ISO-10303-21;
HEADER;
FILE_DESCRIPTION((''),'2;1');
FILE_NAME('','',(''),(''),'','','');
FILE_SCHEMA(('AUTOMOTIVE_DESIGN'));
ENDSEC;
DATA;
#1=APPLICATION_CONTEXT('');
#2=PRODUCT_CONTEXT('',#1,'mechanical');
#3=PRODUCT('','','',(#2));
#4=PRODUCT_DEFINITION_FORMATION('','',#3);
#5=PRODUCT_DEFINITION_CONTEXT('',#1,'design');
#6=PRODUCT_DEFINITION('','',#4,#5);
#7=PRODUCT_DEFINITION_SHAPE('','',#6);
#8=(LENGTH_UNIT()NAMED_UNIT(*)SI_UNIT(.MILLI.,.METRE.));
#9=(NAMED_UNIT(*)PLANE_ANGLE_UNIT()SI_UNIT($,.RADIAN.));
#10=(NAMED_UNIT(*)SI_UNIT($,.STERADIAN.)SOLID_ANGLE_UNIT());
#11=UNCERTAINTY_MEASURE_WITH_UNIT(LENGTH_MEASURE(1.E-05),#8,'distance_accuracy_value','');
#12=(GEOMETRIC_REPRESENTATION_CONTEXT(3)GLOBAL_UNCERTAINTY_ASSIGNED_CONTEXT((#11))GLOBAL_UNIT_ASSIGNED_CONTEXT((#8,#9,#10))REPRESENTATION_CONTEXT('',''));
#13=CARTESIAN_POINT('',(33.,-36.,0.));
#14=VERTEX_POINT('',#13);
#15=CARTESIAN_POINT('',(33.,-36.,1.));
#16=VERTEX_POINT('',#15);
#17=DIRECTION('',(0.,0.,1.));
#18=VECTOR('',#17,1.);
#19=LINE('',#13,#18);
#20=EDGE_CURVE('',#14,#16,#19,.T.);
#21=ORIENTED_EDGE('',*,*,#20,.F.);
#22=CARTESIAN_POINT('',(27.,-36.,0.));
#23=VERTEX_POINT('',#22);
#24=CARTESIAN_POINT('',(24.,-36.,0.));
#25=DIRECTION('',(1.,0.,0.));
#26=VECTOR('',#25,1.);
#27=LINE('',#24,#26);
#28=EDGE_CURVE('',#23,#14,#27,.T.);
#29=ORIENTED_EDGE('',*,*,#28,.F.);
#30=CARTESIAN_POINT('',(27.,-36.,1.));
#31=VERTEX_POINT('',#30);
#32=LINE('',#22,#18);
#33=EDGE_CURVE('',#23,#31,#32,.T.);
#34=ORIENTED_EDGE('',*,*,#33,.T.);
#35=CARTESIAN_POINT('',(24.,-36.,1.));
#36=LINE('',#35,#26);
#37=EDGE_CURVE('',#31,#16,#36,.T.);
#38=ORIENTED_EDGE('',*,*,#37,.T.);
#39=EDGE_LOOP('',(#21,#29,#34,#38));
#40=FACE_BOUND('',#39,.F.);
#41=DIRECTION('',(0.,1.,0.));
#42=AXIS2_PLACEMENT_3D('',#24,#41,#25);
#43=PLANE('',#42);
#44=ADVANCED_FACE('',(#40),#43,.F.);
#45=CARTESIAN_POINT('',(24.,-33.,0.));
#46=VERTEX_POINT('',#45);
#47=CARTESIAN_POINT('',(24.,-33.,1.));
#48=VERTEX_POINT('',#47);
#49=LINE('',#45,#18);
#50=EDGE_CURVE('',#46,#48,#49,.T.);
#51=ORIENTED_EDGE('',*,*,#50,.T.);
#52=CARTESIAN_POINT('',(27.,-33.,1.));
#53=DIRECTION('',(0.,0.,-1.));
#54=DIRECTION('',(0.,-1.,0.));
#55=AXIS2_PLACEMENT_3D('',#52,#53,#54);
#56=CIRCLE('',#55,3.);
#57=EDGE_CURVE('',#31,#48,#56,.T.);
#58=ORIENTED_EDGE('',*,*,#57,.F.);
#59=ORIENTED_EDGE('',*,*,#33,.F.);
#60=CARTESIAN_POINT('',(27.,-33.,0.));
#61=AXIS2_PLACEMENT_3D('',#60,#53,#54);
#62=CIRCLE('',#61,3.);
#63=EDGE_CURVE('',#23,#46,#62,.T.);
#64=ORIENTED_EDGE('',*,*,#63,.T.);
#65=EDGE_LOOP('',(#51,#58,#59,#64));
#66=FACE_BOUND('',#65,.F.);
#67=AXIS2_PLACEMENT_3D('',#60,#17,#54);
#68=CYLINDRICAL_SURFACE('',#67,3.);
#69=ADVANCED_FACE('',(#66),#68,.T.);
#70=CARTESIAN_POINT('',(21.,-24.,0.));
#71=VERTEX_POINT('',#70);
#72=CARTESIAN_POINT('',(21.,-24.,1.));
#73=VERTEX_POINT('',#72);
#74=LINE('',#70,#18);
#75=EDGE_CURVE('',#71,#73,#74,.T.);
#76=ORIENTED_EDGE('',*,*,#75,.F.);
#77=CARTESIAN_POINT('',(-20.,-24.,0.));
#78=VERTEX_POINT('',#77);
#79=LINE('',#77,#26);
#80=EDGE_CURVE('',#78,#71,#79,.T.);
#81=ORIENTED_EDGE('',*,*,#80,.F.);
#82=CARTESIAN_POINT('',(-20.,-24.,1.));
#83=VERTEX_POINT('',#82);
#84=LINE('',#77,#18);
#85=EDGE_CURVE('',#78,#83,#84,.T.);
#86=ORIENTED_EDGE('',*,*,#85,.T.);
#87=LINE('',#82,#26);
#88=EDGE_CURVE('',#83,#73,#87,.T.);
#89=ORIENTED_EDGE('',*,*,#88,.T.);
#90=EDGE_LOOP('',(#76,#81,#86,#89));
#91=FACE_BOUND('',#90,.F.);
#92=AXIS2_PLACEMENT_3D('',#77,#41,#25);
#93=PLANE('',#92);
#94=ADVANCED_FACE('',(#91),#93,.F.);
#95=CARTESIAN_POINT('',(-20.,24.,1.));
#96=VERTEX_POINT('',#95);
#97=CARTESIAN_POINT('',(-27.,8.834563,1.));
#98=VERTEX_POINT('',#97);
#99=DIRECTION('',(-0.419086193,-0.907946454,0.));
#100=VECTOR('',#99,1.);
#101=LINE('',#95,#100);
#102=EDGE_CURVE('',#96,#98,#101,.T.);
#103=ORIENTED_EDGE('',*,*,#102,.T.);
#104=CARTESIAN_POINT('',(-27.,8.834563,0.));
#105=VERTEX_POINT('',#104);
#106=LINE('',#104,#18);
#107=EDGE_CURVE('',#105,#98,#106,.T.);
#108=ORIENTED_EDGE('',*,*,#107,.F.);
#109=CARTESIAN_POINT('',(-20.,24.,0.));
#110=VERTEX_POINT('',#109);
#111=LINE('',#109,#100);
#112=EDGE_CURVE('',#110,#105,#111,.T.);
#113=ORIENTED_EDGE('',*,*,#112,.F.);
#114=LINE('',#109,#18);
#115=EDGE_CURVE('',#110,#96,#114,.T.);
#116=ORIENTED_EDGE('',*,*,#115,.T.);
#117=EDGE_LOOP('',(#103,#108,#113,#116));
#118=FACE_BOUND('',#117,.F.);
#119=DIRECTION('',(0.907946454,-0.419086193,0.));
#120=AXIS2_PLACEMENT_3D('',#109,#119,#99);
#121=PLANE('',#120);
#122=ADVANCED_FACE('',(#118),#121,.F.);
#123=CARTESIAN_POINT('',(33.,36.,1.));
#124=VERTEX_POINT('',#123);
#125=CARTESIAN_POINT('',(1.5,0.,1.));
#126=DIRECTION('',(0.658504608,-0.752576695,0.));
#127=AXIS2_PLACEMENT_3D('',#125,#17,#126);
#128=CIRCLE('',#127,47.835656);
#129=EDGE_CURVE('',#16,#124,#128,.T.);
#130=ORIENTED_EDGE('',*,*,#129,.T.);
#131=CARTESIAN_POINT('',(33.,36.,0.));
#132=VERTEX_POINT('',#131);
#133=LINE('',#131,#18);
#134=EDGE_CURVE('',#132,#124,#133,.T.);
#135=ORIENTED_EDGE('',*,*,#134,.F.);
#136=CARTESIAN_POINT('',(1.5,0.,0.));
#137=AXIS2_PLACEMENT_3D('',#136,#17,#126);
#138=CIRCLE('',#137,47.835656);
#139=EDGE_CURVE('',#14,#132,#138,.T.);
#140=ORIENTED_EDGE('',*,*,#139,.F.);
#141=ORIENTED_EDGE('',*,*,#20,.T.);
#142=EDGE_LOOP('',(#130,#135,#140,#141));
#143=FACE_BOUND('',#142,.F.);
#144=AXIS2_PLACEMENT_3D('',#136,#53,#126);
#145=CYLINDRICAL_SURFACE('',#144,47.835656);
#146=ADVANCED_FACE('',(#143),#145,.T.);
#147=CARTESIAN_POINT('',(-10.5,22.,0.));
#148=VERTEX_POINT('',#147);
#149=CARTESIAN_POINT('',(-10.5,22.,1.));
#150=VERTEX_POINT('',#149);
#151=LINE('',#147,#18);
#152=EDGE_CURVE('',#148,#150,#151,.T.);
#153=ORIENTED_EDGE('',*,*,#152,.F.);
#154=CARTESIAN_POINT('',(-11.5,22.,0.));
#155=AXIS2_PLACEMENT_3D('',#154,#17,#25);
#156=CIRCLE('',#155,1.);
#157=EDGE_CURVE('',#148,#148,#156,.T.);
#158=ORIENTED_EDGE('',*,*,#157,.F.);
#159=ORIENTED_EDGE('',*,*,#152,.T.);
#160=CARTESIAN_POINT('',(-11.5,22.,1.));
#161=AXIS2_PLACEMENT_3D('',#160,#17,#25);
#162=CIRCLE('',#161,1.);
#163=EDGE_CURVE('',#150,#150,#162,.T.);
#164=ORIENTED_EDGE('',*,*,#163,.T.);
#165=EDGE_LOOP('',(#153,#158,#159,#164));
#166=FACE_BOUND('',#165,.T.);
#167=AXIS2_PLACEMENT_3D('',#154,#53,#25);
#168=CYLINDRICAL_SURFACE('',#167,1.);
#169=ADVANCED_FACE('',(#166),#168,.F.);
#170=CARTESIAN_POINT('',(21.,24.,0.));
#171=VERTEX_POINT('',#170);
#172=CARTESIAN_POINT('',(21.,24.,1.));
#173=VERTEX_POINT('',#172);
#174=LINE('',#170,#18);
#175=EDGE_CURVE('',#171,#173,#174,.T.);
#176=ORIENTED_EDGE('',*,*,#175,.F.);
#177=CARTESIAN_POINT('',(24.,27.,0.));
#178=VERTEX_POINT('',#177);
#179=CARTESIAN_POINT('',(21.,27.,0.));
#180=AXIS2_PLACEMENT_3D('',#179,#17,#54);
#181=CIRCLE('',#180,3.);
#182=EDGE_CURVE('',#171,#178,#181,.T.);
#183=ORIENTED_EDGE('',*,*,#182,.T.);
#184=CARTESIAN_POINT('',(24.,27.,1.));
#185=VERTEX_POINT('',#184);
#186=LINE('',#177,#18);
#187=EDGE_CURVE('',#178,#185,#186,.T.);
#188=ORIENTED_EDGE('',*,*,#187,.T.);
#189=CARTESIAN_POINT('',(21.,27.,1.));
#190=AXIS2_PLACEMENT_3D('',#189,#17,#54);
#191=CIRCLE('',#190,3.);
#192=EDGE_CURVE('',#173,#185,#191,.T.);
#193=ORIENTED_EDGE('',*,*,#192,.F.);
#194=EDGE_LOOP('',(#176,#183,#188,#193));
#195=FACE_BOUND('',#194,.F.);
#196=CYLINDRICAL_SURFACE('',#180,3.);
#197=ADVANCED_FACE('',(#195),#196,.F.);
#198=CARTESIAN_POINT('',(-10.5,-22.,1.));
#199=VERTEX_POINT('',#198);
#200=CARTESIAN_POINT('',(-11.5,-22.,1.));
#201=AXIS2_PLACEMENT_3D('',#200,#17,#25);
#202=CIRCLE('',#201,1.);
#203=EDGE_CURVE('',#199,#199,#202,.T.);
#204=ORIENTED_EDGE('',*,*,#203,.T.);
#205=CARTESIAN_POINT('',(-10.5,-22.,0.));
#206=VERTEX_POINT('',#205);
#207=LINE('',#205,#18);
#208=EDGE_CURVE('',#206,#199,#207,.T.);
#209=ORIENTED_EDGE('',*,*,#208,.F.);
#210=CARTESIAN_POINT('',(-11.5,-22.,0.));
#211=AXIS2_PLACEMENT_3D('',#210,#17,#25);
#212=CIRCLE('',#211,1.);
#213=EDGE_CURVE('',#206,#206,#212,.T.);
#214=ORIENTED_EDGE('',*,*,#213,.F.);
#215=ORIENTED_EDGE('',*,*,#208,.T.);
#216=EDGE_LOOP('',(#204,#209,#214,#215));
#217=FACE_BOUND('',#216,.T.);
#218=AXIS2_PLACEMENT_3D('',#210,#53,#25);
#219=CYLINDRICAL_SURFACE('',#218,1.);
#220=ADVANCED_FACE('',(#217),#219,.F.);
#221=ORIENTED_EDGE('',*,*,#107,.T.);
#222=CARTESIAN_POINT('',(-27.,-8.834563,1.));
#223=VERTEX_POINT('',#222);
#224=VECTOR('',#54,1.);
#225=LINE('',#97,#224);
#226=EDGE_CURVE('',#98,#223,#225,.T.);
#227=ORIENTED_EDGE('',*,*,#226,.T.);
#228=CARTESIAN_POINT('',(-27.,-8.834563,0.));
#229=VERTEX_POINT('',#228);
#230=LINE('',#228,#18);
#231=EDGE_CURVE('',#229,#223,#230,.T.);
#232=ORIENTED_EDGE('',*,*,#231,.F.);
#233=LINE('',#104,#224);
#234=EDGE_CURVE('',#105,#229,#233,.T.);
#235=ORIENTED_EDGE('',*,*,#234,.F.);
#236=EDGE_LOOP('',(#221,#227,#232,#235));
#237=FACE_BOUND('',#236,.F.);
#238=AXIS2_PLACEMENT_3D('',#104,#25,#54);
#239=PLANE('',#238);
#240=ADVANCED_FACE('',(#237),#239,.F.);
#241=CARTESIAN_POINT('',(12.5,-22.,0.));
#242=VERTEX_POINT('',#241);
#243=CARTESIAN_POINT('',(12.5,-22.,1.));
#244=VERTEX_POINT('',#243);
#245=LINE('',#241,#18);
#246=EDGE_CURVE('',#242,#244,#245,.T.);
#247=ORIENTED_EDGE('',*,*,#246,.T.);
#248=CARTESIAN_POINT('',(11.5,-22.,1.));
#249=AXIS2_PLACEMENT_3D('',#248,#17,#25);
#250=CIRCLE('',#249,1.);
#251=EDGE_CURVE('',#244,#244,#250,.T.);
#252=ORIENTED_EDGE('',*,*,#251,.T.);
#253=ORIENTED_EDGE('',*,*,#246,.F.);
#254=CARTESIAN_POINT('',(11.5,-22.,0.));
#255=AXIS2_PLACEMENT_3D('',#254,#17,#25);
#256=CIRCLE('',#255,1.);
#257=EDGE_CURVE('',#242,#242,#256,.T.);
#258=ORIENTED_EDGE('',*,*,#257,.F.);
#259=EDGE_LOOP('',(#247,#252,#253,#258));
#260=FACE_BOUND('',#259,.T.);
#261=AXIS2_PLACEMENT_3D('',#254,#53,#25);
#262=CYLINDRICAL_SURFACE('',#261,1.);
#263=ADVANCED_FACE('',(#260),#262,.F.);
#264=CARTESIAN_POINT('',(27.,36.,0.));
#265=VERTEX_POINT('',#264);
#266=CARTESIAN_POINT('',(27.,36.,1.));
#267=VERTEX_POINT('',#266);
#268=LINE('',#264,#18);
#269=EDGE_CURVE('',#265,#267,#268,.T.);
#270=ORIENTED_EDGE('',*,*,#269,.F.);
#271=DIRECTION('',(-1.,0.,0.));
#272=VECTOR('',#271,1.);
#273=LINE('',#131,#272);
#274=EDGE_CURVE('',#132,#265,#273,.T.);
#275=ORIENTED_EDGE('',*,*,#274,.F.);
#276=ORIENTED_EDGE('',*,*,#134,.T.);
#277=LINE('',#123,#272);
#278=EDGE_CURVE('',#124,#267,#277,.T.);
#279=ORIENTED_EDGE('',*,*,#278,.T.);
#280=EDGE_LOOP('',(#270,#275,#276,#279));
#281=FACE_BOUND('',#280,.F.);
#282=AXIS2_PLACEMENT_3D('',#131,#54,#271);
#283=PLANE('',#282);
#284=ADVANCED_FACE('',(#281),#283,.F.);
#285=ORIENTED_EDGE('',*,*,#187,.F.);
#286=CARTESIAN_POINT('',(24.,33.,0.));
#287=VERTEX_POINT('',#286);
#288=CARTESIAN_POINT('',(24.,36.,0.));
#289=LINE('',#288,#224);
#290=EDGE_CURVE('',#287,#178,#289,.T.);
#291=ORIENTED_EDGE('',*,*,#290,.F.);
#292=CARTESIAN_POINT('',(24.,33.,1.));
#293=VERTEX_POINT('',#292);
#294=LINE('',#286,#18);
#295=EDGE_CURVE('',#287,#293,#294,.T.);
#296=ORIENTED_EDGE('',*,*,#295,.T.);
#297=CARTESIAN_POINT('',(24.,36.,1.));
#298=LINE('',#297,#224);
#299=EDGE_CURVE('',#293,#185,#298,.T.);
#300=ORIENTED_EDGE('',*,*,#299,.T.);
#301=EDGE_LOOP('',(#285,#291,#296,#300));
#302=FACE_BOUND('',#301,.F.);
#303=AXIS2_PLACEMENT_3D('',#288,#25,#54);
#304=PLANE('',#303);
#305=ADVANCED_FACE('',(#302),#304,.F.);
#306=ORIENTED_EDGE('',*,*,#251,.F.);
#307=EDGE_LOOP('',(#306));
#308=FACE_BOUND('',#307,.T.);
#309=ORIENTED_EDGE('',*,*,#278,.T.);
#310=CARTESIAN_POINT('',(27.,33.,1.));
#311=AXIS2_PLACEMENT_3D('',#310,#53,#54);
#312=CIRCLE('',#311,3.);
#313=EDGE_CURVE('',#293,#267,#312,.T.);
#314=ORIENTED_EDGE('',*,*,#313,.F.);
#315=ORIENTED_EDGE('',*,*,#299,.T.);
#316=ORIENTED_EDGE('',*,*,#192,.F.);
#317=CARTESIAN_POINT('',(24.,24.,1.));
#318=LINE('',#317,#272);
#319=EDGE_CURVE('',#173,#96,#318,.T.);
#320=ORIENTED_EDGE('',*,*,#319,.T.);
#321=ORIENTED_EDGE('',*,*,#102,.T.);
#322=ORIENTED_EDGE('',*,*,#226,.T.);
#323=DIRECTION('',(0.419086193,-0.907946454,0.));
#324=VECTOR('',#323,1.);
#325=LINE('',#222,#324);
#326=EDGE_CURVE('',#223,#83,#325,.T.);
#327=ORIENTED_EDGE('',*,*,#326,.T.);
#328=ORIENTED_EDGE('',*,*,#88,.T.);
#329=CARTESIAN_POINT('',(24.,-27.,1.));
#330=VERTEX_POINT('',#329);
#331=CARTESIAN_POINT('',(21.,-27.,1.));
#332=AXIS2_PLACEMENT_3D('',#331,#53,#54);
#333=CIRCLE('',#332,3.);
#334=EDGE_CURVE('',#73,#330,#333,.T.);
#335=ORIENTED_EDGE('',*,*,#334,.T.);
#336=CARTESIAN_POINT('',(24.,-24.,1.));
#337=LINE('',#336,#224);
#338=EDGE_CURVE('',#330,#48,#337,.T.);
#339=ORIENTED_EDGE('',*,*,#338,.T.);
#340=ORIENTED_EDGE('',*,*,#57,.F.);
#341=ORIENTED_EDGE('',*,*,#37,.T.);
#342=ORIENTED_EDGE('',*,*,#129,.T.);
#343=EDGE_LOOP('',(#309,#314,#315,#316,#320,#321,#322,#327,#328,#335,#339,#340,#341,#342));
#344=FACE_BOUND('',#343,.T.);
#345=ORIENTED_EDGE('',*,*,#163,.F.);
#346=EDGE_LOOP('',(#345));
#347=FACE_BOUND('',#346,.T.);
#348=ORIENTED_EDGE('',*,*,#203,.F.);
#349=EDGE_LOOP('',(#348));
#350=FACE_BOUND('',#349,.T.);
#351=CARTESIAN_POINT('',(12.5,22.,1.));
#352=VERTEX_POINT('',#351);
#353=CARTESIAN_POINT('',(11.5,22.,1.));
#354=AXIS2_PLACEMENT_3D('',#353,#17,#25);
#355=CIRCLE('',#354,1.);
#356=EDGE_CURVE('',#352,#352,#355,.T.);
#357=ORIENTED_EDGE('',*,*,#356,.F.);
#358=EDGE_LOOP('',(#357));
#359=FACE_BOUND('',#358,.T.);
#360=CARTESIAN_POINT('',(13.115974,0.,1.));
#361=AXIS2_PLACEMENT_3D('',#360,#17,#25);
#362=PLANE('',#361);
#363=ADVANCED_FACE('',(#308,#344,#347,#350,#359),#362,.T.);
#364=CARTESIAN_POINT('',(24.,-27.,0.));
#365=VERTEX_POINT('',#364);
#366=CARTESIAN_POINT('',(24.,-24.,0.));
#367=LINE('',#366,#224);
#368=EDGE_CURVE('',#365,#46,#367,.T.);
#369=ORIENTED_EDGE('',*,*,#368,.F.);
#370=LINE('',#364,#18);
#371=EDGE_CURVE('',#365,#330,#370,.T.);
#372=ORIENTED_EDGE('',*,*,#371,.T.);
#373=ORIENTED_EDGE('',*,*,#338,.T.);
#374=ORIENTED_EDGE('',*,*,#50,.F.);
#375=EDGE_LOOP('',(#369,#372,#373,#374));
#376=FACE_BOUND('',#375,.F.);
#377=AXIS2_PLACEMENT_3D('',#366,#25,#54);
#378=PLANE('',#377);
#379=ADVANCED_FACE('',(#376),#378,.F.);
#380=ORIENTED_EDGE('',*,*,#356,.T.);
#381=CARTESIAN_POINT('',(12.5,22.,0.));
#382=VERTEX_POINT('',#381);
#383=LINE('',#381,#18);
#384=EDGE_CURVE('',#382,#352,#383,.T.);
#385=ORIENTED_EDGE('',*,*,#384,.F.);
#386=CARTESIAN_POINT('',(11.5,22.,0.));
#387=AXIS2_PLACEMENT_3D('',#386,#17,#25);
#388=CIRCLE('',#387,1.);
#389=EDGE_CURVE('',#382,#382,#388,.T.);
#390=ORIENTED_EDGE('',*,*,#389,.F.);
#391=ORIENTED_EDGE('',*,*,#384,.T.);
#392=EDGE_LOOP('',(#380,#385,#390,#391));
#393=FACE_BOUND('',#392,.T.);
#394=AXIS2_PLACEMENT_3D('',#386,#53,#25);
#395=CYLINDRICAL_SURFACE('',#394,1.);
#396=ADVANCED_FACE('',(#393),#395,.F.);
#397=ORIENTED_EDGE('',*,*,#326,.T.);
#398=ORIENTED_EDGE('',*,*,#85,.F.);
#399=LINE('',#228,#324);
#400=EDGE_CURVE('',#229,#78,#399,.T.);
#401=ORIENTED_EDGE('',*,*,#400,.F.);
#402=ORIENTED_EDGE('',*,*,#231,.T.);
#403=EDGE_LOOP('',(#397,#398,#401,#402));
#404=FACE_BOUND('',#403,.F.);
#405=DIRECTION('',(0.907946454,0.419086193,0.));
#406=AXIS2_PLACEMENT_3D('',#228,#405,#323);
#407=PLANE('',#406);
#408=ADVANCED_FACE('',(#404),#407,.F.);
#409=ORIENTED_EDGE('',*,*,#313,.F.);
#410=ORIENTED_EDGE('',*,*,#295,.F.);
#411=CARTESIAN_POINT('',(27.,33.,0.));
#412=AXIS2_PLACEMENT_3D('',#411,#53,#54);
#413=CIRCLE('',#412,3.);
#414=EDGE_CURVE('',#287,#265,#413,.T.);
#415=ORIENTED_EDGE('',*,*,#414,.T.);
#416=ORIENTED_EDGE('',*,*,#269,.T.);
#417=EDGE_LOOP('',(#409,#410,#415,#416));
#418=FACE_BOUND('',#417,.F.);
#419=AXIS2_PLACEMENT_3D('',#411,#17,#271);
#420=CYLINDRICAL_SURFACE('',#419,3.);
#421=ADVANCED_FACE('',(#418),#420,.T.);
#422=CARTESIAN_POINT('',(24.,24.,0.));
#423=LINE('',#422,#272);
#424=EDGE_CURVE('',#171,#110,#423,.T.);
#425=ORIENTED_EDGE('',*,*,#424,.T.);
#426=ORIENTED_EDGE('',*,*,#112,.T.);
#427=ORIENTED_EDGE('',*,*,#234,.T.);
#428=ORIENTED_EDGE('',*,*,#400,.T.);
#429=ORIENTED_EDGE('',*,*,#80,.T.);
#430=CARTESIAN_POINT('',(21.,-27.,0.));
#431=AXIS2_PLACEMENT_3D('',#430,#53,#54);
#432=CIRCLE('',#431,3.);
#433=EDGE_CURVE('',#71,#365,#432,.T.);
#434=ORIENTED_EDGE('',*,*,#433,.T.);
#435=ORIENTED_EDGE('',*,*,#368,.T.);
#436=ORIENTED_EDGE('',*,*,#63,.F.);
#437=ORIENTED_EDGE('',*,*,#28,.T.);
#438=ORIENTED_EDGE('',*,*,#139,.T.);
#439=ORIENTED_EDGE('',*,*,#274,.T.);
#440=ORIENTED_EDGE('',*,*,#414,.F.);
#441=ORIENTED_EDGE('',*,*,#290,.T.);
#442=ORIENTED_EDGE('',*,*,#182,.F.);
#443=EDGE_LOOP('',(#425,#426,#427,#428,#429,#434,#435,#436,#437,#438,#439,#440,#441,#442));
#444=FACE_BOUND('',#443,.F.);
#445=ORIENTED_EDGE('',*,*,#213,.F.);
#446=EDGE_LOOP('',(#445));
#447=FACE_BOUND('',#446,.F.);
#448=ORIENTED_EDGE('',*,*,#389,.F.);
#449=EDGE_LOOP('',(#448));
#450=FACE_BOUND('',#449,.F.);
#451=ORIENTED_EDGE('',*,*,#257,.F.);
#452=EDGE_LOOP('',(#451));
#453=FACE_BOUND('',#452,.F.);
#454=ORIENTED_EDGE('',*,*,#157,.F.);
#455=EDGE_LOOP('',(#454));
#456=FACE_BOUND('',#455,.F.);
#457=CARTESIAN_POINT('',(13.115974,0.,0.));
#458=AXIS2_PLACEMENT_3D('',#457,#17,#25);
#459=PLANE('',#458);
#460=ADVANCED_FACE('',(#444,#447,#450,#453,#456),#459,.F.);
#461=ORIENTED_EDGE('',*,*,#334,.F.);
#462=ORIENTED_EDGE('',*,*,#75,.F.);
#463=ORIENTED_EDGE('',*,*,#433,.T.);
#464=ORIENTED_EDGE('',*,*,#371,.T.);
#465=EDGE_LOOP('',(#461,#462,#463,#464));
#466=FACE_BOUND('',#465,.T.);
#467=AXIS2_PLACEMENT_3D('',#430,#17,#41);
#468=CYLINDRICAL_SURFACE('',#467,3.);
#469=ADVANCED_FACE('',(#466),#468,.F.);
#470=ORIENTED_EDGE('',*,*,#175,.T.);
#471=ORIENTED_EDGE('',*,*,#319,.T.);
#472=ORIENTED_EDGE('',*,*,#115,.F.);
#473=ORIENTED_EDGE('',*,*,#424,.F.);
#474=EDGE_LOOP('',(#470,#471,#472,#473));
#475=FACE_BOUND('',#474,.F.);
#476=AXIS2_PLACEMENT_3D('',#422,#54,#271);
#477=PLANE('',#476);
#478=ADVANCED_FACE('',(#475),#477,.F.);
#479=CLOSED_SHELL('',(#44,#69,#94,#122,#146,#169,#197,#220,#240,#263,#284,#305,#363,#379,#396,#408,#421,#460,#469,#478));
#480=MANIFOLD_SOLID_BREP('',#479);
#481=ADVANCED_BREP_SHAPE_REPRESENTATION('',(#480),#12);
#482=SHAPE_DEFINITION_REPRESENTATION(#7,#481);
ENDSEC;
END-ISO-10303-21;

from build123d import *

# Parameters (mm, degrees)
F0_R     = 1
F1_DEPTH = 1
F2_R     = 3


with BuildPart() as f1:
    # F0 (on Top) → F1 (new body)
    with BuildSketch(Plane.XY):
        with BuildLine():
            Line((24, 24), (0, 24))
            Line((0, 24), (-20, 24))
            Line((-20, 24), (-27, 8.8345631957))
            Line((-27, 8.8345631957), (-27, 0))
            Line((-27, 0), (-27, -8.8345631957))
            Line((-27, -8.8345631957), (-20, -24))
            Line((-20, -24), (0, -24))
            Line((0, -24), (24, -24))
            Line((24, -24), (24, -36))
            Line((24, -36), (33, -36))
            ThreePointArc((33, -36), (49.3356561573, 0), (33, 36))
            Line((33, 36), (24, 36))
            Line((24, 36), (24, 24))
        make_face()
        with Locations((-11.5, -22)):
            Circle(F0_R, mode=Mode.SUBTRACT)
        with Locations((11.5, -22)):
            Circle(F0_R, mode=Mode.SUBTRACT)
        with Locations((-11.5, 22)):
            Circle(F0_R, mode=Mode.SUBTRACT)
        with Locations((11.5, 22)):
            Circle(F0_R, mode=Mode.SUBTRACT)
    extrude(amount=F1_DEPTH)

    # F2
    f2_edges = [f1.edges().sort_by_distance(p)[0] for p in [
        (24, -24, 0.5),
        (24, -36, 0.5),
        (24, 24, 0.5),
        (24, 36, 0.5),
    ]]
    fillet(f2_edges, radius=F2_R)


solid = f1.part
